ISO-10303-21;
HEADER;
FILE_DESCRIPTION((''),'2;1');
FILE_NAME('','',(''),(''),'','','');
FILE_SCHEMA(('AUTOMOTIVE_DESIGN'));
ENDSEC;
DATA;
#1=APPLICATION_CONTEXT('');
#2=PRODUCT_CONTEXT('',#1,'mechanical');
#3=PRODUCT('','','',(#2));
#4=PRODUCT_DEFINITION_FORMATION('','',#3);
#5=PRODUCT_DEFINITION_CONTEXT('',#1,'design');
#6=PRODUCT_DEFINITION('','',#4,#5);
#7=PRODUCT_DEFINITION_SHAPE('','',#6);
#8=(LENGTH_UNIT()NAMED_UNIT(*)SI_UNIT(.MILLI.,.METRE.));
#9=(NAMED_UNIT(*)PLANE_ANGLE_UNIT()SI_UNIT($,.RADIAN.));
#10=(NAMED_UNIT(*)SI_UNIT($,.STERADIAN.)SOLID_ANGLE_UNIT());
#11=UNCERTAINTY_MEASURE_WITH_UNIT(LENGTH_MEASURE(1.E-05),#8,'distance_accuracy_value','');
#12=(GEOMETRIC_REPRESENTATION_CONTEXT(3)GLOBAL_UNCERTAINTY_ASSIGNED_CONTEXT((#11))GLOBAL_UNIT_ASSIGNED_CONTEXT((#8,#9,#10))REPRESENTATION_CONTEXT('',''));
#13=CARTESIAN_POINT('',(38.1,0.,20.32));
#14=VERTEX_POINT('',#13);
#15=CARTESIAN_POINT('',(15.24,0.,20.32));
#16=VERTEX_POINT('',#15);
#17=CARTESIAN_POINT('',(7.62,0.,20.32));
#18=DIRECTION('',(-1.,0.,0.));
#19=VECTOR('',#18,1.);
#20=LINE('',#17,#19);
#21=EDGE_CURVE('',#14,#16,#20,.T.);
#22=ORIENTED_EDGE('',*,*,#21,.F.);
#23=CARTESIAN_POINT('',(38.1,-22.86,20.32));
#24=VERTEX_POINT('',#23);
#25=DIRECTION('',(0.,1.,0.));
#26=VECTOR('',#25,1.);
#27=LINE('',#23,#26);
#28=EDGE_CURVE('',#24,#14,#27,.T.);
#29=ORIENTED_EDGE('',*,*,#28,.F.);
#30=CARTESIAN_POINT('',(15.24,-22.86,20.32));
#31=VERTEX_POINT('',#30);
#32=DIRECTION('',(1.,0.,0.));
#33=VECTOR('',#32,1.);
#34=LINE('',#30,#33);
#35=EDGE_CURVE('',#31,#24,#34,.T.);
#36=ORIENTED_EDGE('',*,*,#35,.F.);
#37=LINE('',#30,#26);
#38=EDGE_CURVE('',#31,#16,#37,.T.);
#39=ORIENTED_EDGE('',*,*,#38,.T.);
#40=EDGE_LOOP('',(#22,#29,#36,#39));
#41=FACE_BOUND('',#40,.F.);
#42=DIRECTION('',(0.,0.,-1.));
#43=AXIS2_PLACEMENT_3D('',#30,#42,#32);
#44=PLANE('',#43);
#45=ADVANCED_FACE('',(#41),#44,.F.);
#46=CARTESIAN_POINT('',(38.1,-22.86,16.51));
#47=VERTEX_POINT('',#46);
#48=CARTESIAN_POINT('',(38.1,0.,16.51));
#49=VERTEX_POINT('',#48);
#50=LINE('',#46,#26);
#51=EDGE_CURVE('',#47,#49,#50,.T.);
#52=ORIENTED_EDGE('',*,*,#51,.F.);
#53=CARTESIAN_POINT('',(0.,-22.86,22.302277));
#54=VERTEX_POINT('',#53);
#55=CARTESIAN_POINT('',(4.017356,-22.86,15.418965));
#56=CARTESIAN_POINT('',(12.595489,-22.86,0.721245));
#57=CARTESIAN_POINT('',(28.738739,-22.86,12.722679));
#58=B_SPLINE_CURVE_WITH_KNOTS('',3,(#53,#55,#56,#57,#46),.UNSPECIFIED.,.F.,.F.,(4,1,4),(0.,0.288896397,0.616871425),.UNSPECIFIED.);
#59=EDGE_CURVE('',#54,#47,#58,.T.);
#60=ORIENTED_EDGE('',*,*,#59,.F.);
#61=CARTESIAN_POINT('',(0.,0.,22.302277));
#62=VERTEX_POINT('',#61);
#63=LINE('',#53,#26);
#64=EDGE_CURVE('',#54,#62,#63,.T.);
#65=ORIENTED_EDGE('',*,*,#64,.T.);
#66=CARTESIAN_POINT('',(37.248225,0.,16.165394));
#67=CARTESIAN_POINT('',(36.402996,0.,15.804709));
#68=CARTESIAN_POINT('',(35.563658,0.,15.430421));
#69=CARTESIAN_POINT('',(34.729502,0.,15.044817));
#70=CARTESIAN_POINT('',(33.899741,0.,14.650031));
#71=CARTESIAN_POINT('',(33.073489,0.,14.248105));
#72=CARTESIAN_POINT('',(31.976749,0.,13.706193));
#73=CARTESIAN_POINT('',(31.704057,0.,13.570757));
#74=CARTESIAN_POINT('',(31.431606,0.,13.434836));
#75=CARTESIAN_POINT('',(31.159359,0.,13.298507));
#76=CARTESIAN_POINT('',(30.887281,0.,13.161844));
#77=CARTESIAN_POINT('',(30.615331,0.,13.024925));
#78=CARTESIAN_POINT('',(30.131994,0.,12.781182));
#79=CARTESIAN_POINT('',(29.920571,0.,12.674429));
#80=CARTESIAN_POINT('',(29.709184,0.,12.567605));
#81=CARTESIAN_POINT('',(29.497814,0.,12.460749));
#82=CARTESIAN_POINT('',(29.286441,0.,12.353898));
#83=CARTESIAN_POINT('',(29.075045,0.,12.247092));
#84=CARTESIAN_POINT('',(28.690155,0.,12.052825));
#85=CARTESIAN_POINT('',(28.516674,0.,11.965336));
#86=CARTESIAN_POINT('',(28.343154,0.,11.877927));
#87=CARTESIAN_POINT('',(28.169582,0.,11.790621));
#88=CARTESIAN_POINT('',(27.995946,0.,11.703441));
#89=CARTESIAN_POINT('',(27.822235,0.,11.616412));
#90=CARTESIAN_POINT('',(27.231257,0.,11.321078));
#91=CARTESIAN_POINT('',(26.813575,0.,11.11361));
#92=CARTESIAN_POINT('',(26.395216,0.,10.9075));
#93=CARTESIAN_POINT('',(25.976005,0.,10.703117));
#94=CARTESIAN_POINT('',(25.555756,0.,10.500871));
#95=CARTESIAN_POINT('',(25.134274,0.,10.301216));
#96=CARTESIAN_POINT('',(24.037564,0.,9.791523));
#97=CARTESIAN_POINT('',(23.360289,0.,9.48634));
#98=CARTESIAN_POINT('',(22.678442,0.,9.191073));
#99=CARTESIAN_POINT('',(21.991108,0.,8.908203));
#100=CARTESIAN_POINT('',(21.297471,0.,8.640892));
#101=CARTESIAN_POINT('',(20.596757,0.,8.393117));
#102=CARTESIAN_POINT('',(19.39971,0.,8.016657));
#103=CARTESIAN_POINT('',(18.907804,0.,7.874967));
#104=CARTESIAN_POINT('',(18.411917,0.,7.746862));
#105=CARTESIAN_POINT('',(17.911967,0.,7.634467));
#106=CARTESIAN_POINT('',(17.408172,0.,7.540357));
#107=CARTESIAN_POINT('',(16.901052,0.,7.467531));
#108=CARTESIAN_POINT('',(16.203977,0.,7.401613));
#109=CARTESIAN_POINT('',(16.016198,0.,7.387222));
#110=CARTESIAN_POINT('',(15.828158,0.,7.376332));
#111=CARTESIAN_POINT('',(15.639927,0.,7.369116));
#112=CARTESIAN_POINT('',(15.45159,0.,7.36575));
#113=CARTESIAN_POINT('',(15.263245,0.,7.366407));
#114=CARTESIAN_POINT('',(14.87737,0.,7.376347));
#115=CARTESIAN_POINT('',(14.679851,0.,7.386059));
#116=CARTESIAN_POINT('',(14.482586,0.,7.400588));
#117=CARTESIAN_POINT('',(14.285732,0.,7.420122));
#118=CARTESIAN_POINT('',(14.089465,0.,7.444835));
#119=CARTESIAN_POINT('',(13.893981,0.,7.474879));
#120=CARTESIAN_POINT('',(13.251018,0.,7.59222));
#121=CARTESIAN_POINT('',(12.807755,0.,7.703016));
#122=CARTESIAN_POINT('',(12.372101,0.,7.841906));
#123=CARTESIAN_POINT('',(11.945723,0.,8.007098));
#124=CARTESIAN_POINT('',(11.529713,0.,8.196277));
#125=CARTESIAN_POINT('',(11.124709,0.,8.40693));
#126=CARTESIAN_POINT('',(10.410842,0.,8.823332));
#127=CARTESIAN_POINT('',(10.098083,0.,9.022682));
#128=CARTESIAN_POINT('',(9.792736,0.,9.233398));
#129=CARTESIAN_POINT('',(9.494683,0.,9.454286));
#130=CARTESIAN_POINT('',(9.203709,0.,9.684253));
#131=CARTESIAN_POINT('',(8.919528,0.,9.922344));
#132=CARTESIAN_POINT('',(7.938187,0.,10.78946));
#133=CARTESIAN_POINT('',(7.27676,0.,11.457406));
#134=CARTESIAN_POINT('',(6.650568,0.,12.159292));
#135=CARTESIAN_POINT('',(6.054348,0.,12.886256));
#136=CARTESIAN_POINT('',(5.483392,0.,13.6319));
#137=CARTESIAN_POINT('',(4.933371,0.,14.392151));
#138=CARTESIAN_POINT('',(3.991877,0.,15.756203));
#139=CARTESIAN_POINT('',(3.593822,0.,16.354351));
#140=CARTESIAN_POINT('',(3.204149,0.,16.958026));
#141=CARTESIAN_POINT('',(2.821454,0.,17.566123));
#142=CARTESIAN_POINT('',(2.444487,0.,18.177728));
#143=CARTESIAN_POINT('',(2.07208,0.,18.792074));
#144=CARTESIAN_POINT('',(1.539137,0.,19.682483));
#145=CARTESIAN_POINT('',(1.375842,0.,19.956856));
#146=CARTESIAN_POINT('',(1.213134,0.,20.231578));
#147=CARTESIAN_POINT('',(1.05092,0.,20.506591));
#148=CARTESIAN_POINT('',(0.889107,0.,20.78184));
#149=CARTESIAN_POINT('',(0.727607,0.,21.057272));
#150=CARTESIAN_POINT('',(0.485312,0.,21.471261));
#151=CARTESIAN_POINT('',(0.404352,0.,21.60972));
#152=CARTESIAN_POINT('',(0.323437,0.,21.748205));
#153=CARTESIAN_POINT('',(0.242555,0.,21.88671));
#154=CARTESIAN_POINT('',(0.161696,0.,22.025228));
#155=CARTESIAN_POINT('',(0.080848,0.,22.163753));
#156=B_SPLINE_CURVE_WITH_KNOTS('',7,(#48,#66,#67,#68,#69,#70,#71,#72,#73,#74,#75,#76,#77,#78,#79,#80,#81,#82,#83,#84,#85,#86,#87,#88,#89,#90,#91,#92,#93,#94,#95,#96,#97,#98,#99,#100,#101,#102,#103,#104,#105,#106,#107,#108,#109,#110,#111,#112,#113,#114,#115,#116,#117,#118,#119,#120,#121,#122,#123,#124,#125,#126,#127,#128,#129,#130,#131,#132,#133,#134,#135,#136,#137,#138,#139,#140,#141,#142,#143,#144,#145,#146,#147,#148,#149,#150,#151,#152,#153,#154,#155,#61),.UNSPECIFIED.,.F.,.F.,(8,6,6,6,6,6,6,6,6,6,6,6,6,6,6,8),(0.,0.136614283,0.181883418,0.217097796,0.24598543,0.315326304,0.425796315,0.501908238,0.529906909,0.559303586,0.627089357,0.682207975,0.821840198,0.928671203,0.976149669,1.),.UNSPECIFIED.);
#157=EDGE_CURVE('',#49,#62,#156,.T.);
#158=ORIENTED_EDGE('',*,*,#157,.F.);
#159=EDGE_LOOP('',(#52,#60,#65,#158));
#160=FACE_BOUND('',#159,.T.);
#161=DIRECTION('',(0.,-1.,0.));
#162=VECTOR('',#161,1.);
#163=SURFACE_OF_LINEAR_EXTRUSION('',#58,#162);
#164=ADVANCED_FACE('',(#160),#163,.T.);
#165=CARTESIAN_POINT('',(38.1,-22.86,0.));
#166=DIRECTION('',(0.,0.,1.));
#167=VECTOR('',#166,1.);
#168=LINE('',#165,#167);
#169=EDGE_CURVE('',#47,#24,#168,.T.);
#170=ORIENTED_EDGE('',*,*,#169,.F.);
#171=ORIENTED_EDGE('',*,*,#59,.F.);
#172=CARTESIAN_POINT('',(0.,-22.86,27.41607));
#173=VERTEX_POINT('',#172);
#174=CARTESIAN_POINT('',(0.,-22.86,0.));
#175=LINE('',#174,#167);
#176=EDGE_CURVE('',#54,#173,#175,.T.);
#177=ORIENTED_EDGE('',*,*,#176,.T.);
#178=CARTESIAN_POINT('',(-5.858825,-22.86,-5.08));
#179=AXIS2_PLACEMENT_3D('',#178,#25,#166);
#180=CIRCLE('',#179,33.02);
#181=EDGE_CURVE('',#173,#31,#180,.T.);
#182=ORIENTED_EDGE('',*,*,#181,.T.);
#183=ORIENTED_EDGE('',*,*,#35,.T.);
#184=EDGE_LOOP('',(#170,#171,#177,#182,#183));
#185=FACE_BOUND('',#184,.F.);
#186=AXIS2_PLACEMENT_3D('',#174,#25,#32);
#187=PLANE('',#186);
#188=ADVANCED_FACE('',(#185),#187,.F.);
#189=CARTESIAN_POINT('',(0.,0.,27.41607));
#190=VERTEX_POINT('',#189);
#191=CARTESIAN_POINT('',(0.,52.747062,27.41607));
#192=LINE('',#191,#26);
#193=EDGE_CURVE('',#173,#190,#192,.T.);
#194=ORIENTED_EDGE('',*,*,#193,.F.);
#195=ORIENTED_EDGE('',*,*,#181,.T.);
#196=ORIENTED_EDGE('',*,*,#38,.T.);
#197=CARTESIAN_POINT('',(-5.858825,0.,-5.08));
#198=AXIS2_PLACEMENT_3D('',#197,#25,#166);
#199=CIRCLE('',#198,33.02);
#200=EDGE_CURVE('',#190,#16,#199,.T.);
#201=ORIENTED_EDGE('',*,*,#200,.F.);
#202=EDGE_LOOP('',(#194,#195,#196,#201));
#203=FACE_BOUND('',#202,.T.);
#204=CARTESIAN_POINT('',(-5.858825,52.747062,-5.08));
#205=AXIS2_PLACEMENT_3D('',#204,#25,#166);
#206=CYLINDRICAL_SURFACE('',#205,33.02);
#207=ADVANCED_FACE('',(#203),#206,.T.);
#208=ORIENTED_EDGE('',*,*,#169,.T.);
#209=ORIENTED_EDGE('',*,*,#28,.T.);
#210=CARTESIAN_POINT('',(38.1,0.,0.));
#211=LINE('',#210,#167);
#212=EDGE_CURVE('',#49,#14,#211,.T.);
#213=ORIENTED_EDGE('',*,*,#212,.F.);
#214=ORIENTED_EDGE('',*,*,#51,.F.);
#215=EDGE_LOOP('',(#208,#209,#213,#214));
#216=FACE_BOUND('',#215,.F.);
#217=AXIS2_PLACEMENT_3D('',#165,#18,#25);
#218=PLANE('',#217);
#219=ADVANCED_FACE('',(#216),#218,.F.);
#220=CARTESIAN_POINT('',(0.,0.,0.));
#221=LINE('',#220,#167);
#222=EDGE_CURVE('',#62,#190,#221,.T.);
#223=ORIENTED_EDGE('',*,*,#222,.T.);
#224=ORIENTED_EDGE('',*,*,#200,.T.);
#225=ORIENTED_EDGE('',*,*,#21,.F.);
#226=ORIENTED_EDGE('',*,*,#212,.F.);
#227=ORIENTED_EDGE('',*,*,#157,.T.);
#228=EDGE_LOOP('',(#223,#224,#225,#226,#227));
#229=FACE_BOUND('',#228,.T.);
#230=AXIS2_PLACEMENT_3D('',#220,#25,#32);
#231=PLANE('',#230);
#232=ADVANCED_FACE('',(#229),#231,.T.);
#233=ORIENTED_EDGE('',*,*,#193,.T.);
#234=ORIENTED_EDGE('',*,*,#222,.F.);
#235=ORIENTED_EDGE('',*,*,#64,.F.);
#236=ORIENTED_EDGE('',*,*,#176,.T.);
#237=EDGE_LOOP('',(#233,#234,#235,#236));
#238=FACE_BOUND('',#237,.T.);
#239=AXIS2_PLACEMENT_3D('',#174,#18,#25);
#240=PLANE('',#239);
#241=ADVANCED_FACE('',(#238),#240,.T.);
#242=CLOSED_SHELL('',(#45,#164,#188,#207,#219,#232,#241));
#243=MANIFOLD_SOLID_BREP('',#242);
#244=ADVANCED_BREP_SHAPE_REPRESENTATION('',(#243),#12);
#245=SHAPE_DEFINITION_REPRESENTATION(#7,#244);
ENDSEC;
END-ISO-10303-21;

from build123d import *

# Parameters (mm, degrees)
F0_W        = 38.1
F0_H        = 22.86
F1_DEPTH    = 33.02
F4_DEPTH    = 25.4
F5_T1_DEPTH = 128.3541230591


# Not quite as in the source:
# - a fillet or chamfer that OpenCascade refuses, or shapes differently, is made with other operations: its cross-section is extruded or revolved along the edge and cut away or added


with BuildPart() as f1:
    # F0 (on Top) → F1 (new body)
    with BuildSketch(Plane.XY):
        with Locations((19.05, -11.43)):
            Rectangle(F0_W, F0_H)
    extrude(amount=F1_DEPTH)

    # F3 (on face) → F4 (cut)
    with BuildSketch(Plane.XZ.offset(22.86)):
        with BuildLine():
            Line((0, 22.3022773862), (0, 0))
            Line((0, 0), (38.1, 0))
            Line((38.1, 0), (38.1, 16.51))
            add(Edge.make_bspline(
                [(0, 22.3022773862), (4.0173555015, 15.4189654394), (12.5954888388, 0.7212450957), (28.7387394496, 12.7226787633), (38.1, 16.51)],
                knots=[0, 0, 0, 0, 0.2888963968, 0.6168714248, 0.6168714248, 0.6168714248, 0.6168714248], degree=3))
        make_face()
        Polygon((0, 33.02), (0, 27.94), (15.24, 27.94), (15.24, 20.32), (38.1, 20.32), (38.1, 33.02), align=None)
    extrude(amount=-F4_DEPTH, mode=Mode.SUBTRACT)

    # F5: fillet of radius 33.02 on 1 edges, made by hand

    # F5_s2 → F5_t1 (cut)
    with BuildSketch(Plane.XZ.offset(-52.7470615295)):
        with BuildLine():
            ThreePointArc((-5.8588246118, 27.94), (5.3575116884, 25.976628922), (15.24, 20.32))
            Line((15.24, 20.32), (15.24, 27.94))
            Line((15.24, 27.94), (-5.8588246118, 27.94))
        make_face()
    extrude(amount=F5_T1_DEPTH, mode=Mode.SUBTRACT)


solid = f1.part
